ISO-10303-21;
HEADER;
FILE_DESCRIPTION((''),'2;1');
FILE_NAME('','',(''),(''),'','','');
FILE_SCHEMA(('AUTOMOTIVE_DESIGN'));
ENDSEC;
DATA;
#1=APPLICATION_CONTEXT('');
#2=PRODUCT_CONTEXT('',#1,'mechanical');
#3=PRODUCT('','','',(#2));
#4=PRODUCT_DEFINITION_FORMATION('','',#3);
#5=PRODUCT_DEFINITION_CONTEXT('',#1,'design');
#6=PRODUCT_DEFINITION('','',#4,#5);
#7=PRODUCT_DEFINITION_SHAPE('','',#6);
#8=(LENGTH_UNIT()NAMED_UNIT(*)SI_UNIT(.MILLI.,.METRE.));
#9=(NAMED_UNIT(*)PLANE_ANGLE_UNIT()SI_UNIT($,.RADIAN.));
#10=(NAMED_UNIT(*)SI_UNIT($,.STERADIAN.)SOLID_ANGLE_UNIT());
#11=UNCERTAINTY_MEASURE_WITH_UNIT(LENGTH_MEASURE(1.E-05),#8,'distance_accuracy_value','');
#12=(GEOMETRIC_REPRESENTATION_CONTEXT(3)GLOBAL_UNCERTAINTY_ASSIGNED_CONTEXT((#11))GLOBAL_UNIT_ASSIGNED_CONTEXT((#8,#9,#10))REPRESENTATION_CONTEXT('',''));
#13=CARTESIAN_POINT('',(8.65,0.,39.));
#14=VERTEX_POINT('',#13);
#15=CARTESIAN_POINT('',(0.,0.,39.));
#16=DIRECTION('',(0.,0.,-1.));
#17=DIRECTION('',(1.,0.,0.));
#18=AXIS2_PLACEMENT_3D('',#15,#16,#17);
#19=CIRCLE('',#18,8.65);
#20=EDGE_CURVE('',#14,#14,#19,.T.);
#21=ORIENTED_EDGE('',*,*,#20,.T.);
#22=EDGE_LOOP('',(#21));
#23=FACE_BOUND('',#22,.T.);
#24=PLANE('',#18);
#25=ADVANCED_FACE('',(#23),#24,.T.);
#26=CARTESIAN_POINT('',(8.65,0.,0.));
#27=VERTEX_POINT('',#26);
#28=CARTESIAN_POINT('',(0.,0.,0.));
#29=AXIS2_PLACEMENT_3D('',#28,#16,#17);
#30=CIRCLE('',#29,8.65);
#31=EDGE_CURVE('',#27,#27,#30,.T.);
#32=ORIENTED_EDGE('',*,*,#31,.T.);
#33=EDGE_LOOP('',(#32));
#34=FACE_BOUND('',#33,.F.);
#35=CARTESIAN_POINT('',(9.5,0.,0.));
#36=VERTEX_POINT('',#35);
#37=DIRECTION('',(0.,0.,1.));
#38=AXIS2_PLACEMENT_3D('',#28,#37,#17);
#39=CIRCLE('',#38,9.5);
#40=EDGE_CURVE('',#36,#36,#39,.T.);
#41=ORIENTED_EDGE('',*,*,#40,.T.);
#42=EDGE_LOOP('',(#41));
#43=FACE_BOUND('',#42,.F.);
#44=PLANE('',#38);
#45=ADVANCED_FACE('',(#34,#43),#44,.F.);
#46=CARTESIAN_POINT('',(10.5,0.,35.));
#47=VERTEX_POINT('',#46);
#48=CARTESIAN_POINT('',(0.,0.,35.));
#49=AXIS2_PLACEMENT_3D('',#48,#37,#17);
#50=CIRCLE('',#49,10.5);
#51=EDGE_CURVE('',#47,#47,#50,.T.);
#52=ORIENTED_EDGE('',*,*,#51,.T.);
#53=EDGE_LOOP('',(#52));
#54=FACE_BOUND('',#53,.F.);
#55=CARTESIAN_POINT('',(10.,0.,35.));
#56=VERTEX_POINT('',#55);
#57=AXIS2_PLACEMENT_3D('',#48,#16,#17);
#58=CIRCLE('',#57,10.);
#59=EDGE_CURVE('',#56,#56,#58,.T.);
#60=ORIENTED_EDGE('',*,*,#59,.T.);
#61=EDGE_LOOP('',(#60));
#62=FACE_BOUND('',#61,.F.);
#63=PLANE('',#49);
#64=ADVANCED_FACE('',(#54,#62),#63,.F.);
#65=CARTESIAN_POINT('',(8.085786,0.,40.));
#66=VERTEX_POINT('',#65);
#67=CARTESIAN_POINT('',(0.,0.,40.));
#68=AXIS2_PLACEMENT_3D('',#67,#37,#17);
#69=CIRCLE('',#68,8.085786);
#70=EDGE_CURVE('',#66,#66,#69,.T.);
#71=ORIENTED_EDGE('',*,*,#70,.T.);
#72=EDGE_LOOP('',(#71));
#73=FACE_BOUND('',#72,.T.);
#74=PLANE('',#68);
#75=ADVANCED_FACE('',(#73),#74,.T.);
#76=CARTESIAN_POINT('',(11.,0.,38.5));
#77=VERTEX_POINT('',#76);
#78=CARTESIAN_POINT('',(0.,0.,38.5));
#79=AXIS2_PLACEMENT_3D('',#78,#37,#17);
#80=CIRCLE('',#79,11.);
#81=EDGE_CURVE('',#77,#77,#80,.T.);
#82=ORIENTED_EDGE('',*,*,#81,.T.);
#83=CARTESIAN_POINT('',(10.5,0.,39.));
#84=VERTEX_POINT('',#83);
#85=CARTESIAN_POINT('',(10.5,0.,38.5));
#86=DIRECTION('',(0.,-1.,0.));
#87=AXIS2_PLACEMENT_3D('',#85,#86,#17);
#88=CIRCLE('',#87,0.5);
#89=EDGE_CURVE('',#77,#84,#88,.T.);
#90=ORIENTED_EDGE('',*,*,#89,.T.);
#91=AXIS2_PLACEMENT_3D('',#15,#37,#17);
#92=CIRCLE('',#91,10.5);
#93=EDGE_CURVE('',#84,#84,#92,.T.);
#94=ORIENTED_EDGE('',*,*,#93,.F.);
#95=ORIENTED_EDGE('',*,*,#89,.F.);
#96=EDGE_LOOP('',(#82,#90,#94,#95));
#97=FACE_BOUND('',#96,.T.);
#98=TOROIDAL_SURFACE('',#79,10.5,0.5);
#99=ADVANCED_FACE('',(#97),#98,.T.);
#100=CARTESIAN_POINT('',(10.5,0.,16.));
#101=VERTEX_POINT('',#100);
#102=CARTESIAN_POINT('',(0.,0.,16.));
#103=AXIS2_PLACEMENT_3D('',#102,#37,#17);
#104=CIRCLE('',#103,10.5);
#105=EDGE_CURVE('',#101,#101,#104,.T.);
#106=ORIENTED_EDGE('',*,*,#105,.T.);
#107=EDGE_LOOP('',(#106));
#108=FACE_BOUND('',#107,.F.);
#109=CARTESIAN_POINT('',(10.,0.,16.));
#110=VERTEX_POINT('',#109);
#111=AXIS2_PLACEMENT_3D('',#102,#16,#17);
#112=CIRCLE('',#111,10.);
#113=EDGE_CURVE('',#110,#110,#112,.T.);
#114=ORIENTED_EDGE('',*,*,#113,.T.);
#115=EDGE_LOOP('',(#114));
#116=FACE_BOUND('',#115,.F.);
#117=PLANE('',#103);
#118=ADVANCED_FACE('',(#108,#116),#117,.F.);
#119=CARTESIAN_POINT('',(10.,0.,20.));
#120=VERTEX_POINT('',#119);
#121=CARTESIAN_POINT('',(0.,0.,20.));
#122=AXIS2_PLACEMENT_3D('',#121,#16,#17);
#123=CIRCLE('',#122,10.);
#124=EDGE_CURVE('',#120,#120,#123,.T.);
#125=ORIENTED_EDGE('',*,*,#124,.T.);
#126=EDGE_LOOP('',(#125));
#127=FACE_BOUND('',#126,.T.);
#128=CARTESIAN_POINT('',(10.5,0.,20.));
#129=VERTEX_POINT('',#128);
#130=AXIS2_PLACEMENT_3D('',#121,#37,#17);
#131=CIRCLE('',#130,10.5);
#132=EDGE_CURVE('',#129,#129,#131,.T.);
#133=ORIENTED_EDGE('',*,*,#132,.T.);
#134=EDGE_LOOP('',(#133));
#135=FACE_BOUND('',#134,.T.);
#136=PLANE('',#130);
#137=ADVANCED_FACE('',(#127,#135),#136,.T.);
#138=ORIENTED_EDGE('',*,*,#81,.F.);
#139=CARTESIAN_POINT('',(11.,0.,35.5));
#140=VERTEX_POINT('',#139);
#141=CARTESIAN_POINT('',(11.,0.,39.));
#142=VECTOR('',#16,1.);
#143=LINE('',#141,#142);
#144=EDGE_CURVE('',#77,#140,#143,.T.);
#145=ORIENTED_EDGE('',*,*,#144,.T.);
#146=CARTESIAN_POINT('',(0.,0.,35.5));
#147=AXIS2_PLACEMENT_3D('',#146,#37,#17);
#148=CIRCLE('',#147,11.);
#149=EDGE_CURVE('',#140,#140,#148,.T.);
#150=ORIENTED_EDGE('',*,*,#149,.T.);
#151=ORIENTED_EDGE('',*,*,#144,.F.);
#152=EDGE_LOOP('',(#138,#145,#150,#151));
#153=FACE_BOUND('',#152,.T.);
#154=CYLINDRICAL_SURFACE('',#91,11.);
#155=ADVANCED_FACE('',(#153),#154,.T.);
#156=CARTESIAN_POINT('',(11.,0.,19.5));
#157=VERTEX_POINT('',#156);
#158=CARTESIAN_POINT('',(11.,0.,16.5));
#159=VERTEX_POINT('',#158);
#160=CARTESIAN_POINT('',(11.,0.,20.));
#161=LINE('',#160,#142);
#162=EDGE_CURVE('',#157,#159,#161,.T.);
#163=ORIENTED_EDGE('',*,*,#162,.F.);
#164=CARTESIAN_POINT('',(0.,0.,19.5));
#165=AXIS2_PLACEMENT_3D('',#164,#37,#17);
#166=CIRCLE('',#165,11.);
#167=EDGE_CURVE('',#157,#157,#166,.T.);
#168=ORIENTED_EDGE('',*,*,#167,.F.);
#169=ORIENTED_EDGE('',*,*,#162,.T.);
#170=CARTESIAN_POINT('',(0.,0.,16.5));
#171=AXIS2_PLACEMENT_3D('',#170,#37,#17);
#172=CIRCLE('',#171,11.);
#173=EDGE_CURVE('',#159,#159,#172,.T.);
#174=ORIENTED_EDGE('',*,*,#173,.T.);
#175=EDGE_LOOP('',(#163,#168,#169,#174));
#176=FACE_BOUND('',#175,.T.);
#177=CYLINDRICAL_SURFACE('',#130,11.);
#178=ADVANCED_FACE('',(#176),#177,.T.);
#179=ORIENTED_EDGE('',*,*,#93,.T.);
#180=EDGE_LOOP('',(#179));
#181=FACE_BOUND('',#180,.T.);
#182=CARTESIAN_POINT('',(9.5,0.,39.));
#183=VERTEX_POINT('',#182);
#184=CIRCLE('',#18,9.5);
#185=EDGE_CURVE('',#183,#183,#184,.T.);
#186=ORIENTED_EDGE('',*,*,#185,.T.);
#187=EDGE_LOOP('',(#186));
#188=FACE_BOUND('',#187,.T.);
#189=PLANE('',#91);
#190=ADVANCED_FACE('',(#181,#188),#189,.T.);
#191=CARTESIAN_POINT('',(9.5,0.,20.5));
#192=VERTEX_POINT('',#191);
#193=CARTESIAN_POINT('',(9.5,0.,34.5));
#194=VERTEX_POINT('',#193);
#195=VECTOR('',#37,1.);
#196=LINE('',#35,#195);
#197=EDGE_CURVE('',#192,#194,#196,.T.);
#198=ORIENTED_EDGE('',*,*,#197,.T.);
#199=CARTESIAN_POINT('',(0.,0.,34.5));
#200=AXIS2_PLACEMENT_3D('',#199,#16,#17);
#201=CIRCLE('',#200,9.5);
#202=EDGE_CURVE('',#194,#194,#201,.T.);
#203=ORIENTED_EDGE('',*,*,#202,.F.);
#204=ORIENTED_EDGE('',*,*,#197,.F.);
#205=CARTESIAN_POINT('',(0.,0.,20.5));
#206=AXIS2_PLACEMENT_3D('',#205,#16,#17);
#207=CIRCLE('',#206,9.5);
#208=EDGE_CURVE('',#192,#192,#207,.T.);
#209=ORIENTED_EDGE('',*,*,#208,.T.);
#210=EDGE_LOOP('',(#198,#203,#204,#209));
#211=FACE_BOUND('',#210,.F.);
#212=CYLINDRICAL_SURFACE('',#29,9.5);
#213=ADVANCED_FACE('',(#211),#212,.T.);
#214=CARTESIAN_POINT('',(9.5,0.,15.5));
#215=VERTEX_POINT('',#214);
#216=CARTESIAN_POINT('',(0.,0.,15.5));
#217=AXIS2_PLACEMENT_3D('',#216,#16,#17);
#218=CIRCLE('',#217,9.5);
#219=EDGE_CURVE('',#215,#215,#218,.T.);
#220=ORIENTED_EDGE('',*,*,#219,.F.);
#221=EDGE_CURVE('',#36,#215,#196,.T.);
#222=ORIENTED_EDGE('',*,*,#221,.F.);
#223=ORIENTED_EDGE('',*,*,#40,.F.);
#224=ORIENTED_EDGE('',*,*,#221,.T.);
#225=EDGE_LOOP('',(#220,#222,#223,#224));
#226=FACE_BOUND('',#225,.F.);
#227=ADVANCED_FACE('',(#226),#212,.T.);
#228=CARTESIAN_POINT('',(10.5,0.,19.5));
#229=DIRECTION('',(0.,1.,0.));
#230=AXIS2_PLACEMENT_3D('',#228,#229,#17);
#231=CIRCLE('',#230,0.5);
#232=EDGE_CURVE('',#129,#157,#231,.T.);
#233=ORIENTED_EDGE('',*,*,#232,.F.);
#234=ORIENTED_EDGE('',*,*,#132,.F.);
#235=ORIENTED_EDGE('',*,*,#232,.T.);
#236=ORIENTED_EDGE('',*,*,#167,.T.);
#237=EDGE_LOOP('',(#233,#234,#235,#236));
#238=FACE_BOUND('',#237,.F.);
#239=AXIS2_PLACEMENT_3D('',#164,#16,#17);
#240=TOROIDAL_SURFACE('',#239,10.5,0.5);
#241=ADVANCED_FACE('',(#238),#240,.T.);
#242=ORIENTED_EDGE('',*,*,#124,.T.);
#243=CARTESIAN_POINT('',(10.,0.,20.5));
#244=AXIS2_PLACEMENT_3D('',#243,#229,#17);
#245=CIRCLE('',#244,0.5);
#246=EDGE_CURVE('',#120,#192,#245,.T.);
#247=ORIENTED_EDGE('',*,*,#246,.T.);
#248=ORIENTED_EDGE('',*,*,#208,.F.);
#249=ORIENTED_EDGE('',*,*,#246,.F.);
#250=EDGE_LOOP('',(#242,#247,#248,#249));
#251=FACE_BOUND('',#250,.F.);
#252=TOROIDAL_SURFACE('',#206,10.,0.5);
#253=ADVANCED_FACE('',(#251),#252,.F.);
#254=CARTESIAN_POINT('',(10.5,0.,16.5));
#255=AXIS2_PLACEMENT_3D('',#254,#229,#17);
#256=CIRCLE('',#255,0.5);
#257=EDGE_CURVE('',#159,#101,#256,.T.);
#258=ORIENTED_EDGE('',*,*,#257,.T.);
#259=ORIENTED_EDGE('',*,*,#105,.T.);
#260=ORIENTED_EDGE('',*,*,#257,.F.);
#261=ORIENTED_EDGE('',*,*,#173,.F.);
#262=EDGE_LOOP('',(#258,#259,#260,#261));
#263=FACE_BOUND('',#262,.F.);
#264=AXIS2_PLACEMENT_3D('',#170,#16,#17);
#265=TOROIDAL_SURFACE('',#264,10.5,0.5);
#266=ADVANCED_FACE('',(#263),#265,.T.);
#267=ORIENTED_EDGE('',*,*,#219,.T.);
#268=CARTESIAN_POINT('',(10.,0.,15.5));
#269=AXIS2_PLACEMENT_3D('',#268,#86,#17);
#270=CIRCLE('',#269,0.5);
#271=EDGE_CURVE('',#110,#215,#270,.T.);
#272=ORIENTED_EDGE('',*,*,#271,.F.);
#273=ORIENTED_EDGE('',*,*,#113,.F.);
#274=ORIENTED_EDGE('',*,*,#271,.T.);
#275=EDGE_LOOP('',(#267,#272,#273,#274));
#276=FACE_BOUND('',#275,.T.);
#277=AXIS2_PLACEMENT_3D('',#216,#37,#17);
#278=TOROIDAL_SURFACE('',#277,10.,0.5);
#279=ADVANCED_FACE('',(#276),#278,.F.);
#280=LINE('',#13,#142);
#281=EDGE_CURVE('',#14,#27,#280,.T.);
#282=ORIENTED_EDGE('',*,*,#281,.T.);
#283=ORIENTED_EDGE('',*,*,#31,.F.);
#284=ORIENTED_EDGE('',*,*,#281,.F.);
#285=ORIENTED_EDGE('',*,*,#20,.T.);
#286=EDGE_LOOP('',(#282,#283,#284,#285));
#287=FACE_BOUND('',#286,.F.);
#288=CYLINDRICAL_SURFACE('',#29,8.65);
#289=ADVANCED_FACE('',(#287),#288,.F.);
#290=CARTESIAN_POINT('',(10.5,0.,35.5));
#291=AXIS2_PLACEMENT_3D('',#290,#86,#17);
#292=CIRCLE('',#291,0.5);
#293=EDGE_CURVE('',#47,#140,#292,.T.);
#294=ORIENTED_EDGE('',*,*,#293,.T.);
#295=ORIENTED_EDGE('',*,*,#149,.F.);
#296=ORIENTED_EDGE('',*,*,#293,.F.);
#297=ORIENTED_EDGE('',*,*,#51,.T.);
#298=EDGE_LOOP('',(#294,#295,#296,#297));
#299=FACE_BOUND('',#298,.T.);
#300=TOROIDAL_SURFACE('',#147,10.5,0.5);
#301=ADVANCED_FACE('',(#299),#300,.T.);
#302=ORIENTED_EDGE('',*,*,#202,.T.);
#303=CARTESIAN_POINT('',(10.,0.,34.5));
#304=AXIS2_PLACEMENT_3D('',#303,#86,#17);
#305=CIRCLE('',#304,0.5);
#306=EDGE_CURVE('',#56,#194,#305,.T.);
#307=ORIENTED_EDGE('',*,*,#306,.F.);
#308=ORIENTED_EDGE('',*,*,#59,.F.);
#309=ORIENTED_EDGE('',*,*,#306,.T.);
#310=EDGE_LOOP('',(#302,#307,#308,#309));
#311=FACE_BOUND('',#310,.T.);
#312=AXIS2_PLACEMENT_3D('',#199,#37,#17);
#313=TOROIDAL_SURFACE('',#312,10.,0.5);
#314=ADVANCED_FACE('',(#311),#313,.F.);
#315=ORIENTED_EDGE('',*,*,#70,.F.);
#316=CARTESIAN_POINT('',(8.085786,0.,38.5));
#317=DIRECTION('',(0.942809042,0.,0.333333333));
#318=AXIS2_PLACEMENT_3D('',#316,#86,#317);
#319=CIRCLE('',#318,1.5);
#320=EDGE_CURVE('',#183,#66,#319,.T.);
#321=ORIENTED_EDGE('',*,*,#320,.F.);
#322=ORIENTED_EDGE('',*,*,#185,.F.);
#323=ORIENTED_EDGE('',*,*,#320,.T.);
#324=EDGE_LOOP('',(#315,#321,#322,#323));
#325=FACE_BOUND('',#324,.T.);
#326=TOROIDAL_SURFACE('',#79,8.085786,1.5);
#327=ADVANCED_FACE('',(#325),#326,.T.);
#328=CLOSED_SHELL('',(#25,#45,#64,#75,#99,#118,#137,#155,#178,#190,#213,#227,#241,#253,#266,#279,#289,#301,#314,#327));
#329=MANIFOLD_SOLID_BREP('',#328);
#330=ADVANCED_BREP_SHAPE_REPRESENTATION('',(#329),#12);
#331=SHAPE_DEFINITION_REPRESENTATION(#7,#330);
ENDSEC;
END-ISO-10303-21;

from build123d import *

# Parameters (mm, degrees)
F0_R      = 9.5
F1_DEPTH  = 40
F2_R      = 8.65
F3_DEPTH  = 37.5
F5_R      = 11
F6_DEPTH  = 4
F8_R      = 11
F9_DEPTH  = 4
F11_R     = 0.5
F12_R     = 0.5
F13_R     = 0.5
F14_R     = 0.5
F15_R     = 0.5
F16_R     = 8.65
F17_DEPTH = 39


# Not quite as in the source:
# - a fillet or chamfer that OpenCascade refuses, or shapes differently, is made with other operations: its cross-section is extruded or revolved along the edge and cut away or added


with BuildPart() as f1:
    # F0 (on Top) → F1 (new body)
    with BuildSketch(Plane.XY):
        Circle(F0_R)
    extrude(amount=F1_DEPTH)

    # F2 (on face) → F3 (cut)
    with BuildSketch(Plane(origin=(0, 0, 0), x_dir=(1, 0, 0), z_dir=(0, 0, -1))):
        Circle(F2_R)
    extrude(amount=-F3_DEPTH, mode=Mode.SUBTRACT)

    # F5 (on offset) → F6 (join)
    with BuildSketch(Plane.XY.offset(39)):
        Circle(F5_R)
    extrude(amount=-F6_DEPTH)

    # F8 (on offset) → F9 (join)
    with BuildSketch(Plane.XY.offset(20)):
        Circle(F8_R)
    extrude(amount=-F9_DEPTH)

    # F10: fillet of radius 1.5 on 1 edges, made by hand

    # F10_s1 → F10_t2 (revolve, cut)
    with BuildSketch(Plane.XZ):
        with BuildLine():
            ThreePointArc((9.5, 39), (8.9518118414, 39.7247448714), (8.0857864376, 40))
            Line((8.0857864376, 40), (9.5, 40))
            Line((9.5, 40), (9.5, 39))
        make_face()
    revolve(axis=Axis((0, 0, 40), (0, 0, 1)), mode=Mode.SUBTRACT)

    # F11
    f11_edges = [f1.edges().sort_by_distance(p)[0] for p in [
        (11, 0, 37),
        (-11, 0, 39),
        (-11, 0, 35),
    ]]
    fillet(f11_edges, radius=F11_R)

    # F12
    f12_edges = [f1.edges().sort_by_distance(p)[0] for p in [
        (-9.5, 0, 35),
    ]]
    fillet(f12_edges, radius=F12_R)

    # F13
    f13_edges = [f1.edges().sort_by_distance(p)[0] for p in [
        (11, 0, 18),
        (-11, 0, 20),
        (-11, 0, 16),
    ]]
    fillet(f13_edges, radius=F13_R)

    # F14
    f14_edges = [f1.edges().sort_by_distance(p)[0] for p in [
        (-9.5, 0, 20),
    ]]
    fillet(f14_edges, radius=F14_R)

    # F15
    f15_edges = [f1.edges().sort_by_distance(p)[0] for p in [
        (-9.5, 0, 16),
    ]]
    fillet(f15_edges, radius=F15_R)

    # F16 (on face) → F17 (cut)
    with BuildSketch(Plane(origin=(0, 0, 0), x_dir=(1, 0, 0), z_dir=(0, 0, -1))):
        Circle(F16_R)
    extrude(amount=-F17_DEPTH, mode=Mode.SUBTRACT)


solid = f1.part
